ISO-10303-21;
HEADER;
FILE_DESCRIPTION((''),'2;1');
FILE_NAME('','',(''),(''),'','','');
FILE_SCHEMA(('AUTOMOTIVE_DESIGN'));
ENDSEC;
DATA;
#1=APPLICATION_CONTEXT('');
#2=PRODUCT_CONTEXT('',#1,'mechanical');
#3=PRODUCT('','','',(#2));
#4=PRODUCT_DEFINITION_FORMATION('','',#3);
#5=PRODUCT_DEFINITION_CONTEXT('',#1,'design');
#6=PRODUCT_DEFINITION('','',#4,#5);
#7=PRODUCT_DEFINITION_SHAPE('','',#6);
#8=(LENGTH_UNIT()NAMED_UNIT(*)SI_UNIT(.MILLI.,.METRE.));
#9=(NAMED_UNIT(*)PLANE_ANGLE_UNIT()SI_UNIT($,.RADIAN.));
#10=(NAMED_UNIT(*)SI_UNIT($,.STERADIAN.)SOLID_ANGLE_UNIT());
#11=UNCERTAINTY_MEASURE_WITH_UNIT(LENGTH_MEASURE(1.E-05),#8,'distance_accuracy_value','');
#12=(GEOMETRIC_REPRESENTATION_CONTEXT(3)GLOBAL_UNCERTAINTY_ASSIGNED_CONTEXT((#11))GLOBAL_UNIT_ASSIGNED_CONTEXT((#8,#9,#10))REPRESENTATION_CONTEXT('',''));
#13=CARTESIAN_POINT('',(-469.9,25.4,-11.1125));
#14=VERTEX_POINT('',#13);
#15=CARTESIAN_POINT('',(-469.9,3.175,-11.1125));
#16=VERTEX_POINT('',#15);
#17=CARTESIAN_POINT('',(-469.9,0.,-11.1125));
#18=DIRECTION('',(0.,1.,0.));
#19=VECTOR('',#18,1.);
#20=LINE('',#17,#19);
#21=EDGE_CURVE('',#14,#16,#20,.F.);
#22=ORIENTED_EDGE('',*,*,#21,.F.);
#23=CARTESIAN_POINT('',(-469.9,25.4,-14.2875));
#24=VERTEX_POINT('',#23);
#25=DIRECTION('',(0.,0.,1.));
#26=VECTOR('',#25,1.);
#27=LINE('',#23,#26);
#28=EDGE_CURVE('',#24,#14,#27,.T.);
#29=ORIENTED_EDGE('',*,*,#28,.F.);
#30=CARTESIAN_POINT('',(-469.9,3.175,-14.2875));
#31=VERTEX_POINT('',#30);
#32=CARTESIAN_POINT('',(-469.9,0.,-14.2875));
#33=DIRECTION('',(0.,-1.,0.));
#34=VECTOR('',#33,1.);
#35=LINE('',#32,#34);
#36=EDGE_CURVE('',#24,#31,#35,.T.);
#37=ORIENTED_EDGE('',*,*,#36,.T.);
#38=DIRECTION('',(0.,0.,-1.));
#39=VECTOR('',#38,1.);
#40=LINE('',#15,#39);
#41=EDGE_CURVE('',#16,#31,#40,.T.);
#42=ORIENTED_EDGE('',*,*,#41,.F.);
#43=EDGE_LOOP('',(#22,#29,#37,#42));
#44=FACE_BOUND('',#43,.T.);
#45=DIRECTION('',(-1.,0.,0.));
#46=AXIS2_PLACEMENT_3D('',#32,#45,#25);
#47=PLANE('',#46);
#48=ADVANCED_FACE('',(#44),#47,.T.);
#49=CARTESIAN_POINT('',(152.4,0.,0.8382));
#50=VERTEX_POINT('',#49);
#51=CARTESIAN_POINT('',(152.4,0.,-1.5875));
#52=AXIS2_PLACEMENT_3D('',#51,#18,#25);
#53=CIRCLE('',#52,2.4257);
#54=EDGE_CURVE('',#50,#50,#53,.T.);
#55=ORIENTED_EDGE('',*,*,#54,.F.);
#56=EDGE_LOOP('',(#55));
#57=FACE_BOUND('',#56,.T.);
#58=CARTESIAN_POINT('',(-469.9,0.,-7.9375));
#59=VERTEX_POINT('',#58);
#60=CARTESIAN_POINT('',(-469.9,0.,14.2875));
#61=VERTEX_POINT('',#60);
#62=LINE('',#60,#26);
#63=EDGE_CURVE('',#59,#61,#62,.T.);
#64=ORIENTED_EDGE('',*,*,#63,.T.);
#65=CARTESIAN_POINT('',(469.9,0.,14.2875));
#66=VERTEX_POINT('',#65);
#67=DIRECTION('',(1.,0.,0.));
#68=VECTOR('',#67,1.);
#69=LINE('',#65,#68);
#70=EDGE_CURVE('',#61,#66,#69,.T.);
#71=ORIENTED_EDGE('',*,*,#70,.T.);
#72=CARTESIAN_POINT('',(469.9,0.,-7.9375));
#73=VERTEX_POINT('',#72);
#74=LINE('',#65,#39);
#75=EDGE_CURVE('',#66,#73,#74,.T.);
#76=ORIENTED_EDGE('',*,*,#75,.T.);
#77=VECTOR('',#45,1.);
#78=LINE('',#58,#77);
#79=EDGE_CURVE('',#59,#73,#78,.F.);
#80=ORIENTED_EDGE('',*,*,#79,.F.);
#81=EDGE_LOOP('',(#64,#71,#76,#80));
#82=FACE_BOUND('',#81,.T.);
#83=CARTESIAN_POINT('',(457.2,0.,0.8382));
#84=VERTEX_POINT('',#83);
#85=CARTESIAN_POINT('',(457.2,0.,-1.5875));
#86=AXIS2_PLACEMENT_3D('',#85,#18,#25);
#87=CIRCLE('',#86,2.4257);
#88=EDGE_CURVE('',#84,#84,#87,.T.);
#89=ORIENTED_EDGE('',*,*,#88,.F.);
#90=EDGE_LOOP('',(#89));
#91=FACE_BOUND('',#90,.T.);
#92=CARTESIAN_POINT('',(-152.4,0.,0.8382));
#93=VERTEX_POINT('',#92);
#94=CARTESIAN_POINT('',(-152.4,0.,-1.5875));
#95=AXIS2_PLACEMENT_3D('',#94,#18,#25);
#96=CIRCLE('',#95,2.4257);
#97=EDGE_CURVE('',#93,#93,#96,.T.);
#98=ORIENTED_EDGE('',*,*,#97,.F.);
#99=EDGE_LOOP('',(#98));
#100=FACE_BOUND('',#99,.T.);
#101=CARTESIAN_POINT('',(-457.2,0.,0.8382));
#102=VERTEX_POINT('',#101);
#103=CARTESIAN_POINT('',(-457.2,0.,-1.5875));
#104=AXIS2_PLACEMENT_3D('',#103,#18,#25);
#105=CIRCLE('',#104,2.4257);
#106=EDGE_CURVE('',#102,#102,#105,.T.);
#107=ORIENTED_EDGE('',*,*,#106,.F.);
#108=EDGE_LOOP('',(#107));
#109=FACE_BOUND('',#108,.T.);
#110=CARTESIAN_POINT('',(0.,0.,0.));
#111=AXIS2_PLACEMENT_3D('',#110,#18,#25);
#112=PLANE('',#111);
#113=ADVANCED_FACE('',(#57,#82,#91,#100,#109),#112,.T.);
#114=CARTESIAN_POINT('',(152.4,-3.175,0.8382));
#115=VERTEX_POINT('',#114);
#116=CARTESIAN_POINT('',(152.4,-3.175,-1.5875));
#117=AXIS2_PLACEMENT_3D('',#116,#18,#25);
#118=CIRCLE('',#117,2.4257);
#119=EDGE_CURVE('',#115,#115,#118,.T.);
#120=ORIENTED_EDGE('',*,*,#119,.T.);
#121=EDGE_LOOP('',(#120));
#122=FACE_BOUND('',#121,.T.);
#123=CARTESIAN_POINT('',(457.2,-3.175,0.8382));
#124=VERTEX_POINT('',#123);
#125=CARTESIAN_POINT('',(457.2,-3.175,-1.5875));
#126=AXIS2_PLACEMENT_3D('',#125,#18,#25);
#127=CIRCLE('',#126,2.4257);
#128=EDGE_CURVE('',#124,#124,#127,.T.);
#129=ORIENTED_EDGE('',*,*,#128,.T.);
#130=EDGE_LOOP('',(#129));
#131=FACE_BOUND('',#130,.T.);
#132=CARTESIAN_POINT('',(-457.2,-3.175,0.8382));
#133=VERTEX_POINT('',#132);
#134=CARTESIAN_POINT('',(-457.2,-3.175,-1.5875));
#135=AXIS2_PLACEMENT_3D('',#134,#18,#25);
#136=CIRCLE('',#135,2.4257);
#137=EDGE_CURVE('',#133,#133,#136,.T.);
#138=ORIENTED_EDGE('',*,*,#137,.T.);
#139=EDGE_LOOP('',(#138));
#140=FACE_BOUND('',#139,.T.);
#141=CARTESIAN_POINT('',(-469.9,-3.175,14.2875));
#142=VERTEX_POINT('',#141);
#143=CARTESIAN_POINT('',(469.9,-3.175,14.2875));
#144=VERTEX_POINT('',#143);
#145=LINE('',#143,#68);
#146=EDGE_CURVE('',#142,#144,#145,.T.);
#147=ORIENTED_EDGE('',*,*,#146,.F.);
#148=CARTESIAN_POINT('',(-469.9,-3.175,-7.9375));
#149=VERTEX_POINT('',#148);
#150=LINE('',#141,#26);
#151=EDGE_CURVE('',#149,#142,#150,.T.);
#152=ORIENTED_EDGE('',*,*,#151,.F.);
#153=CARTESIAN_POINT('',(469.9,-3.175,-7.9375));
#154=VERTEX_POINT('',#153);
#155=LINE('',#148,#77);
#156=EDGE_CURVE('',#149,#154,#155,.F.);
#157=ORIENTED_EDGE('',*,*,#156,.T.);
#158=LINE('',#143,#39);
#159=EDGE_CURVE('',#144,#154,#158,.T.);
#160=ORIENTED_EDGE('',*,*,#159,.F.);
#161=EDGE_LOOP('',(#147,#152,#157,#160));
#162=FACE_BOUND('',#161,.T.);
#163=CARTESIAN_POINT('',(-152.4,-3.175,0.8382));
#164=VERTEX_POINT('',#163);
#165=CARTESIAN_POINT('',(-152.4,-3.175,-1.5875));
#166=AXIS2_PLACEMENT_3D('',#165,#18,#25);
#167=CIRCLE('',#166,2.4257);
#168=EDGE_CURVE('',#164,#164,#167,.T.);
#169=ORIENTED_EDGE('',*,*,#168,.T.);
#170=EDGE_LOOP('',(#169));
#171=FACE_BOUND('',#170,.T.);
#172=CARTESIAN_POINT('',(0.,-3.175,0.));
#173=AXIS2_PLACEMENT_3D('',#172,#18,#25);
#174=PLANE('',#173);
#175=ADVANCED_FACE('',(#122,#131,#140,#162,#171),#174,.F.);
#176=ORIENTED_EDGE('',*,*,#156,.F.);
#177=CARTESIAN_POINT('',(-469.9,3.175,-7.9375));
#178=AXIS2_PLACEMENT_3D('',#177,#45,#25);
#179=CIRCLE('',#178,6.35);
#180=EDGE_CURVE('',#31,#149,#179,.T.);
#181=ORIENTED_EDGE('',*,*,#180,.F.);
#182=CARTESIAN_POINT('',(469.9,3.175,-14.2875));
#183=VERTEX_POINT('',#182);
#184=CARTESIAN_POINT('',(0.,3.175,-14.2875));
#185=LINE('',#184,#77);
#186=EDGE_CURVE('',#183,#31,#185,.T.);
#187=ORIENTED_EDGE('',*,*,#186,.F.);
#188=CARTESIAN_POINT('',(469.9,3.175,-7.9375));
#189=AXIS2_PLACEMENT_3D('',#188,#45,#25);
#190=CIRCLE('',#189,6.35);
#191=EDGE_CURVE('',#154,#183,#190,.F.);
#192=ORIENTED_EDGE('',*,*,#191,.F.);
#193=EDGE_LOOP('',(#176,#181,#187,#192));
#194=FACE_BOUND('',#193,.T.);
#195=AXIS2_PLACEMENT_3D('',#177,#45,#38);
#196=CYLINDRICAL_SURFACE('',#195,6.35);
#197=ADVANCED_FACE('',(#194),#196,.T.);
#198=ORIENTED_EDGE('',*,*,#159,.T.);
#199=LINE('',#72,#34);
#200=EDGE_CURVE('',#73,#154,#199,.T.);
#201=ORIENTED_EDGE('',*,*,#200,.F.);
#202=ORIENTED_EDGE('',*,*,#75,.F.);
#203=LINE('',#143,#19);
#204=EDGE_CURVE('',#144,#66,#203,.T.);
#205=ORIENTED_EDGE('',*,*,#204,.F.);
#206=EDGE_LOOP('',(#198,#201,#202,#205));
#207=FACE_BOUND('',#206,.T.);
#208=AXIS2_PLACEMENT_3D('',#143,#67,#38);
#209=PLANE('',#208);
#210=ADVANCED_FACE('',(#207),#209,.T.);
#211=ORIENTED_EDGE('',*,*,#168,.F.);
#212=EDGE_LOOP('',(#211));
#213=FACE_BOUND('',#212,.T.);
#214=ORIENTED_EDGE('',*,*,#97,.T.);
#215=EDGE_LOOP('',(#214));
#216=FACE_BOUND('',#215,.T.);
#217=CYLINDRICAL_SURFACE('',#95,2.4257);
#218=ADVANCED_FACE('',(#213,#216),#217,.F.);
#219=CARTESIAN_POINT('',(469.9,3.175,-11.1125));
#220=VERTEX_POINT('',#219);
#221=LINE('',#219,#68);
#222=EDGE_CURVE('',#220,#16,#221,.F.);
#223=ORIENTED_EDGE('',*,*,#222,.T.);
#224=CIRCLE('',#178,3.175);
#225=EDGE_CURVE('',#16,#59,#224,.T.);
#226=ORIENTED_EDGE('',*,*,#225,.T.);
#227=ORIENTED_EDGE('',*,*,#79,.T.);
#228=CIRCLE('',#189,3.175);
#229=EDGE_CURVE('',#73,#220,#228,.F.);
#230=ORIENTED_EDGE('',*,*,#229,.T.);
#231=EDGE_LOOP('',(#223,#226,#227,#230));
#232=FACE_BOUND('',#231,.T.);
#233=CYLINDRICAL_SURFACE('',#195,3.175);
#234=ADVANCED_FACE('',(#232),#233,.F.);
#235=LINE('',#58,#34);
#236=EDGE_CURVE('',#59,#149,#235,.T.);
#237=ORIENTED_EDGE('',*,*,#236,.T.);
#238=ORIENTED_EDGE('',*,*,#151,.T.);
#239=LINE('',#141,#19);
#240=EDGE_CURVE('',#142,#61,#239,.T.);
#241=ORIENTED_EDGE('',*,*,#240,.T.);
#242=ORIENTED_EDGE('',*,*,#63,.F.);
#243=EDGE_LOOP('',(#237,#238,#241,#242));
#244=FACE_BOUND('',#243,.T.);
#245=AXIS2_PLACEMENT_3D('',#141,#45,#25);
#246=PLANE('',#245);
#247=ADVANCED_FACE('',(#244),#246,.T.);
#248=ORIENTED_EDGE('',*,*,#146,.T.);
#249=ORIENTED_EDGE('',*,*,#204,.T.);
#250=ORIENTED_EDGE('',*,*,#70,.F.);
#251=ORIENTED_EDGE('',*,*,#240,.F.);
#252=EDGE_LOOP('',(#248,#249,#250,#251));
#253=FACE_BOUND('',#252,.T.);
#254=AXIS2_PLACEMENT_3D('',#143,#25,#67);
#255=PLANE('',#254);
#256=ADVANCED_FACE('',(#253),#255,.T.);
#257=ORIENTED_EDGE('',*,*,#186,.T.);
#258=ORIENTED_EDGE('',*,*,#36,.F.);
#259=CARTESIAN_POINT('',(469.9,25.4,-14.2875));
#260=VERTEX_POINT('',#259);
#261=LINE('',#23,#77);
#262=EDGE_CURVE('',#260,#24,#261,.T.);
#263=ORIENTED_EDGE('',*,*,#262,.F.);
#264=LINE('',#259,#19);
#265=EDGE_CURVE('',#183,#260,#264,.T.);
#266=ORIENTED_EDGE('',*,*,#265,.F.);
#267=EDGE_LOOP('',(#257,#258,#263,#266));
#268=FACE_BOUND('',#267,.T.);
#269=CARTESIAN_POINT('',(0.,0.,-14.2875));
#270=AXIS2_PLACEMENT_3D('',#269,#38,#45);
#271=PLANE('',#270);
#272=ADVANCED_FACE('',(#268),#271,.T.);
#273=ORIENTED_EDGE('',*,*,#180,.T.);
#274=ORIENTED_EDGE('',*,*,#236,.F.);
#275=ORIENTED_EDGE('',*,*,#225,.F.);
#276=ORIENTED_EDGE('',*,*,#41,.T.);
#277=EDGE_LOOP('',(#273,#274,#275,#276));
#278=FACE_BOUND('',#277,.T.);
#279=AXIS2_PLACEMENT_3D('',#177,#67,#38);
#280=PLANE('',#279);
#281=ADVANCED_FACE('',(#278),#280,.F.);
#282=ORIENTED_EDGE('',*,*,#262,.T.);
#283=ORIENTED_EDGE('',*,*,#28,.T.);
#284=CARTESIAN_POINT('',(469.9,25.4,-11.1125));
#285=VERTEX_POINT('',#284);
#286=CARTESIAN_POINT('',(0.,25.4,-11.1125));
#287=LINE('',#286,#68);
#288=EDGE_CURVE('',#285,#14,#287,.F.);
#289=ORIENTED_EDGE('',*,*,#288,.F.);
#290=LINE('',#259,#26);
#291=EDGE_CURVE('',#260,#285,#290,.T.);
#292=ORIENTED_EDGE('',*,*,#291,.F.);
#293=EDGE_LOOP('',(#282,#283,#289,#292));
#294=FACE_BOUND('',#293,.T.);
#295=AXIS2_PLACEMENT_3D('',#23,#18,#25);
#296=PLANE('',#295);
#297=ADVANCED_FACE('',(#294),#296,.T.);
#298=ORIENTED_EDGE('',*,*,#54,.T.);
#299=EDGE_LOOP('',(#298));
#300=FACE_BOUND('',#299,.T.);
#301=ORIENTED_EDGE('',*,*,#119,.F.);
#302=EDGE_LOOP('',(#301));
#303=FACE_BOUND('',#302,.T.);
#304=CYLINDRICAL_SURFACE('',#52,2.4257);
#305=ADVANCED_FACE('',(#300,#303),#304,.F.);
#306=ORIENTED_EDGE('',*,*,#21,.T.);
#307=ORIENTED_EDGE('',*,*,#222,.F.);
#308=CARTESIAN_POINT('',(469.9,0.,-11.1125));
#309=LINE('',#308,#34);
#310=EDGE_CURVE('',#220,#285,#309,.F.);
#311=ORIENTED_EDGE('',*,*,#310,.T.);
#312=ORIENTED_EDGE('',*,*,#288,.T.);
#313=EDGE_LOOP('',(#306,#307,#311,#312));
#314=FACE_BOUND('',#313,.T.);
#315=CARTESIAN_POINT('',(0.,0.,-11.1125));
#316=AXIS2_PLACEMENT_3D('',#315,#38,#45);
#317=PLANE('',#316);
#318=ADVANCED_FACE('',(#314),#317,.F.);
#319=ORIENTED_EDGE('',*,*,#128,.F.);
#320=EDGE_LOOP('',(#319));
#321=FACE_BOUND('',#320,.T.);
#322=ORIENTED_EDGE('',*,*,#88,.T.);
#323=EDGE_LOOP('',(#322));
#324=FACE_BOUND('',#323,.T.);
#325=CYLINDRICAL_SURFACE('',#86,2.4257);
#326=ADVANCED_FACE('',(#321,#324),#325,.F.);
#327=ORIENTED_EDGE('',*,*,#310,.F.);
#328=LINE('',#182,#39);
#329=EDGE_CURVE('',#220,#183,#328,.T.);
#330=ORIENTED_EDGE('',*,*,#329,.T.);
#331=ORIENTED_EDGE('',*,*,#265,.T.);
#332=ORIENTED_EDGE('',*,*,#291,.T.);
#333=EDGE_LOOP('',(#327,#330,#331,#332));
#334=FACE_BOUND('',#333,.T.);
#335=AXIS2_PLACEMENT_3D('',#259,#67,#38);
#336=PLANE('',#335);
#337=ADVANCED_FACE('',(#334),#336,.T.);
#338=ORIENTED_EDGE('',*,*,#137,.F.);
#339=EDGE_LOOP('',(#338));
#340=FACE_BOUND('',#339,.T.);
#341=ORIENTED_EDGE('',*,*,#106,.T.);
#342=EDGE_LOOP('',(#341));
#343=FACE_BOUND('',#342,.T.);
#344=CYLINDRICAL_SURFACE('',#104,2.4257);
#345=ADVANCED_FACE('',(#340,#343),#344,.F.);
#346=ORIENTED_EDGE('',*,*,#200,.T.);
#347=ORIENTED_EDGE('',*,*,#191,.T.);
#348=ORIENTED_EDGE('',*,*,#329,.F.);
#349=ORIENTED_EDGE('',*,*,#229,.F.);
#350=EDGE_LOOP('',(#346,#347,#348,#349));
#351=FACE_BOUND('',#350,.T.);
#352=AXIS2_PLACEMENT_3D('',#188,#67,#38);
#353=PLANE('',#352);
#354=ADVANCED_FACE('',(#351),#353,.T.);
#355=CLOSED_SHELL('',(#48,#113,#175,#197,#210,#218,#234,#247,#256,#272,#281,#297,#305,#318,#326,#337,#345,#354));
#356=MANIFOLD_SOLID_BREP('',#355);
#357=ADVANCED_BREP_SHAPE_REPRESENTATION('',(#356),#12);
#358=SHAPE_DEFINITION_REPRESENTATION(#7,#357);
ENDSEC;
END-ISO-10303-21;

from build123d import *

# Parameters (mm, degrees)
SKETCH1_W                    = 939.8
SKETCH1_H                    = 28.575
BASE_FLANGE1_DEPTH           = 3.175
EDGE_FLANGE1_STRIP_W         = 19.05
EDGE_FLANGE1_STRIP_H         = 3.175
EDGE_FLANGE1_STRIP_CUT_DEPTH = 939.8
EDGE_FLANGE1_DEPTH           = 939.8
F_11_0_191_DIAMETER_HOLE1_D  = 4.8514
LPATTERN1_COUNT              = 4
LPATTERN1_PITCH              = 304.8


# Sheet-metal steps are written as plain solids
with BuildPart() as part:
    # Sketch1 → Base-Flange1 (new body)
    with BuildSketch(Plane(origin=(0, 0, 0), x_dir=(1, 0, 0), z_dir=(0, 1, 0))):
        Rectangle(SKETCH1_W, SKETCH1_H)
    extrude(amount=-BASE_FLANGE1_DEPTH)

    # Edge-Flange1 strip (across the edge) → Edge-Flange1 strip cut (cut)
    with BuildSketch(Plane(origin=(469.9, 0, -14.2875), x_dir=(0, 0, 1), z_dir=(-1, 0, 0))):
        with Locations((-3.175, -1.5875)):
            Rectangle(EDGE_FLANGE1_STRIP_W, EDGE_FLANGE1_STRIP_H)
    extrude(amount=EDGE_FLANGE1_STRIP_CUT_DEPTH, mode=Mode.SUBTRACT)

    # Edge-Flange1 section (across the edge) → Edge-Flange1 (add)
    with BuildSketch(Plane(origin=(469.9, 0, -14.2875), x_dir=(0, 0, 1), z_dir=(-1, 0, 0))):
        with BuildLine():
            Line((0, 3.175), (0, 25.4))
            Line((0, 25.4), (3.175, 25.4))
            Line((3.175, 25.4), (3.175, 3.175))
            ThreePointArc((3.175, 3.175), (4.10493597, 0.92993597), (6.35, 0))
            Line((6.35, 0), (6.35, -3.175))
            ThreePointArc((6.35, -3.175), (1.859871939, -1.315128061), (0, 3.175))
        make_face()
    extrude(amount=EDGE_FLANGE1_DEPTH)

    # #11 (0.191) Diameter Hole1 (through all)
    with Locations(Plane(origin=(0, 0, 0), x_dir=(1, 0, 0), z_dir=(0, 1, 0))):
        with Locations((-457.2, 1.5875)):
            f_11_0_191_diameter_hole1 = Hole(F_11_0_191_DIAMETER_HOLE1_D / 2)

    # LPattern1: #11 (0.191) Diameter Hole1 ×4
    with Locations(*[(i * LPATTERN1_PITCH, 0, 0) for i in range(1, LPATTERN1_COUNT)]):
        add(f_11_0_191_diameter_hole1, mode=Mode.SUBTRACT)


solid = part.part
